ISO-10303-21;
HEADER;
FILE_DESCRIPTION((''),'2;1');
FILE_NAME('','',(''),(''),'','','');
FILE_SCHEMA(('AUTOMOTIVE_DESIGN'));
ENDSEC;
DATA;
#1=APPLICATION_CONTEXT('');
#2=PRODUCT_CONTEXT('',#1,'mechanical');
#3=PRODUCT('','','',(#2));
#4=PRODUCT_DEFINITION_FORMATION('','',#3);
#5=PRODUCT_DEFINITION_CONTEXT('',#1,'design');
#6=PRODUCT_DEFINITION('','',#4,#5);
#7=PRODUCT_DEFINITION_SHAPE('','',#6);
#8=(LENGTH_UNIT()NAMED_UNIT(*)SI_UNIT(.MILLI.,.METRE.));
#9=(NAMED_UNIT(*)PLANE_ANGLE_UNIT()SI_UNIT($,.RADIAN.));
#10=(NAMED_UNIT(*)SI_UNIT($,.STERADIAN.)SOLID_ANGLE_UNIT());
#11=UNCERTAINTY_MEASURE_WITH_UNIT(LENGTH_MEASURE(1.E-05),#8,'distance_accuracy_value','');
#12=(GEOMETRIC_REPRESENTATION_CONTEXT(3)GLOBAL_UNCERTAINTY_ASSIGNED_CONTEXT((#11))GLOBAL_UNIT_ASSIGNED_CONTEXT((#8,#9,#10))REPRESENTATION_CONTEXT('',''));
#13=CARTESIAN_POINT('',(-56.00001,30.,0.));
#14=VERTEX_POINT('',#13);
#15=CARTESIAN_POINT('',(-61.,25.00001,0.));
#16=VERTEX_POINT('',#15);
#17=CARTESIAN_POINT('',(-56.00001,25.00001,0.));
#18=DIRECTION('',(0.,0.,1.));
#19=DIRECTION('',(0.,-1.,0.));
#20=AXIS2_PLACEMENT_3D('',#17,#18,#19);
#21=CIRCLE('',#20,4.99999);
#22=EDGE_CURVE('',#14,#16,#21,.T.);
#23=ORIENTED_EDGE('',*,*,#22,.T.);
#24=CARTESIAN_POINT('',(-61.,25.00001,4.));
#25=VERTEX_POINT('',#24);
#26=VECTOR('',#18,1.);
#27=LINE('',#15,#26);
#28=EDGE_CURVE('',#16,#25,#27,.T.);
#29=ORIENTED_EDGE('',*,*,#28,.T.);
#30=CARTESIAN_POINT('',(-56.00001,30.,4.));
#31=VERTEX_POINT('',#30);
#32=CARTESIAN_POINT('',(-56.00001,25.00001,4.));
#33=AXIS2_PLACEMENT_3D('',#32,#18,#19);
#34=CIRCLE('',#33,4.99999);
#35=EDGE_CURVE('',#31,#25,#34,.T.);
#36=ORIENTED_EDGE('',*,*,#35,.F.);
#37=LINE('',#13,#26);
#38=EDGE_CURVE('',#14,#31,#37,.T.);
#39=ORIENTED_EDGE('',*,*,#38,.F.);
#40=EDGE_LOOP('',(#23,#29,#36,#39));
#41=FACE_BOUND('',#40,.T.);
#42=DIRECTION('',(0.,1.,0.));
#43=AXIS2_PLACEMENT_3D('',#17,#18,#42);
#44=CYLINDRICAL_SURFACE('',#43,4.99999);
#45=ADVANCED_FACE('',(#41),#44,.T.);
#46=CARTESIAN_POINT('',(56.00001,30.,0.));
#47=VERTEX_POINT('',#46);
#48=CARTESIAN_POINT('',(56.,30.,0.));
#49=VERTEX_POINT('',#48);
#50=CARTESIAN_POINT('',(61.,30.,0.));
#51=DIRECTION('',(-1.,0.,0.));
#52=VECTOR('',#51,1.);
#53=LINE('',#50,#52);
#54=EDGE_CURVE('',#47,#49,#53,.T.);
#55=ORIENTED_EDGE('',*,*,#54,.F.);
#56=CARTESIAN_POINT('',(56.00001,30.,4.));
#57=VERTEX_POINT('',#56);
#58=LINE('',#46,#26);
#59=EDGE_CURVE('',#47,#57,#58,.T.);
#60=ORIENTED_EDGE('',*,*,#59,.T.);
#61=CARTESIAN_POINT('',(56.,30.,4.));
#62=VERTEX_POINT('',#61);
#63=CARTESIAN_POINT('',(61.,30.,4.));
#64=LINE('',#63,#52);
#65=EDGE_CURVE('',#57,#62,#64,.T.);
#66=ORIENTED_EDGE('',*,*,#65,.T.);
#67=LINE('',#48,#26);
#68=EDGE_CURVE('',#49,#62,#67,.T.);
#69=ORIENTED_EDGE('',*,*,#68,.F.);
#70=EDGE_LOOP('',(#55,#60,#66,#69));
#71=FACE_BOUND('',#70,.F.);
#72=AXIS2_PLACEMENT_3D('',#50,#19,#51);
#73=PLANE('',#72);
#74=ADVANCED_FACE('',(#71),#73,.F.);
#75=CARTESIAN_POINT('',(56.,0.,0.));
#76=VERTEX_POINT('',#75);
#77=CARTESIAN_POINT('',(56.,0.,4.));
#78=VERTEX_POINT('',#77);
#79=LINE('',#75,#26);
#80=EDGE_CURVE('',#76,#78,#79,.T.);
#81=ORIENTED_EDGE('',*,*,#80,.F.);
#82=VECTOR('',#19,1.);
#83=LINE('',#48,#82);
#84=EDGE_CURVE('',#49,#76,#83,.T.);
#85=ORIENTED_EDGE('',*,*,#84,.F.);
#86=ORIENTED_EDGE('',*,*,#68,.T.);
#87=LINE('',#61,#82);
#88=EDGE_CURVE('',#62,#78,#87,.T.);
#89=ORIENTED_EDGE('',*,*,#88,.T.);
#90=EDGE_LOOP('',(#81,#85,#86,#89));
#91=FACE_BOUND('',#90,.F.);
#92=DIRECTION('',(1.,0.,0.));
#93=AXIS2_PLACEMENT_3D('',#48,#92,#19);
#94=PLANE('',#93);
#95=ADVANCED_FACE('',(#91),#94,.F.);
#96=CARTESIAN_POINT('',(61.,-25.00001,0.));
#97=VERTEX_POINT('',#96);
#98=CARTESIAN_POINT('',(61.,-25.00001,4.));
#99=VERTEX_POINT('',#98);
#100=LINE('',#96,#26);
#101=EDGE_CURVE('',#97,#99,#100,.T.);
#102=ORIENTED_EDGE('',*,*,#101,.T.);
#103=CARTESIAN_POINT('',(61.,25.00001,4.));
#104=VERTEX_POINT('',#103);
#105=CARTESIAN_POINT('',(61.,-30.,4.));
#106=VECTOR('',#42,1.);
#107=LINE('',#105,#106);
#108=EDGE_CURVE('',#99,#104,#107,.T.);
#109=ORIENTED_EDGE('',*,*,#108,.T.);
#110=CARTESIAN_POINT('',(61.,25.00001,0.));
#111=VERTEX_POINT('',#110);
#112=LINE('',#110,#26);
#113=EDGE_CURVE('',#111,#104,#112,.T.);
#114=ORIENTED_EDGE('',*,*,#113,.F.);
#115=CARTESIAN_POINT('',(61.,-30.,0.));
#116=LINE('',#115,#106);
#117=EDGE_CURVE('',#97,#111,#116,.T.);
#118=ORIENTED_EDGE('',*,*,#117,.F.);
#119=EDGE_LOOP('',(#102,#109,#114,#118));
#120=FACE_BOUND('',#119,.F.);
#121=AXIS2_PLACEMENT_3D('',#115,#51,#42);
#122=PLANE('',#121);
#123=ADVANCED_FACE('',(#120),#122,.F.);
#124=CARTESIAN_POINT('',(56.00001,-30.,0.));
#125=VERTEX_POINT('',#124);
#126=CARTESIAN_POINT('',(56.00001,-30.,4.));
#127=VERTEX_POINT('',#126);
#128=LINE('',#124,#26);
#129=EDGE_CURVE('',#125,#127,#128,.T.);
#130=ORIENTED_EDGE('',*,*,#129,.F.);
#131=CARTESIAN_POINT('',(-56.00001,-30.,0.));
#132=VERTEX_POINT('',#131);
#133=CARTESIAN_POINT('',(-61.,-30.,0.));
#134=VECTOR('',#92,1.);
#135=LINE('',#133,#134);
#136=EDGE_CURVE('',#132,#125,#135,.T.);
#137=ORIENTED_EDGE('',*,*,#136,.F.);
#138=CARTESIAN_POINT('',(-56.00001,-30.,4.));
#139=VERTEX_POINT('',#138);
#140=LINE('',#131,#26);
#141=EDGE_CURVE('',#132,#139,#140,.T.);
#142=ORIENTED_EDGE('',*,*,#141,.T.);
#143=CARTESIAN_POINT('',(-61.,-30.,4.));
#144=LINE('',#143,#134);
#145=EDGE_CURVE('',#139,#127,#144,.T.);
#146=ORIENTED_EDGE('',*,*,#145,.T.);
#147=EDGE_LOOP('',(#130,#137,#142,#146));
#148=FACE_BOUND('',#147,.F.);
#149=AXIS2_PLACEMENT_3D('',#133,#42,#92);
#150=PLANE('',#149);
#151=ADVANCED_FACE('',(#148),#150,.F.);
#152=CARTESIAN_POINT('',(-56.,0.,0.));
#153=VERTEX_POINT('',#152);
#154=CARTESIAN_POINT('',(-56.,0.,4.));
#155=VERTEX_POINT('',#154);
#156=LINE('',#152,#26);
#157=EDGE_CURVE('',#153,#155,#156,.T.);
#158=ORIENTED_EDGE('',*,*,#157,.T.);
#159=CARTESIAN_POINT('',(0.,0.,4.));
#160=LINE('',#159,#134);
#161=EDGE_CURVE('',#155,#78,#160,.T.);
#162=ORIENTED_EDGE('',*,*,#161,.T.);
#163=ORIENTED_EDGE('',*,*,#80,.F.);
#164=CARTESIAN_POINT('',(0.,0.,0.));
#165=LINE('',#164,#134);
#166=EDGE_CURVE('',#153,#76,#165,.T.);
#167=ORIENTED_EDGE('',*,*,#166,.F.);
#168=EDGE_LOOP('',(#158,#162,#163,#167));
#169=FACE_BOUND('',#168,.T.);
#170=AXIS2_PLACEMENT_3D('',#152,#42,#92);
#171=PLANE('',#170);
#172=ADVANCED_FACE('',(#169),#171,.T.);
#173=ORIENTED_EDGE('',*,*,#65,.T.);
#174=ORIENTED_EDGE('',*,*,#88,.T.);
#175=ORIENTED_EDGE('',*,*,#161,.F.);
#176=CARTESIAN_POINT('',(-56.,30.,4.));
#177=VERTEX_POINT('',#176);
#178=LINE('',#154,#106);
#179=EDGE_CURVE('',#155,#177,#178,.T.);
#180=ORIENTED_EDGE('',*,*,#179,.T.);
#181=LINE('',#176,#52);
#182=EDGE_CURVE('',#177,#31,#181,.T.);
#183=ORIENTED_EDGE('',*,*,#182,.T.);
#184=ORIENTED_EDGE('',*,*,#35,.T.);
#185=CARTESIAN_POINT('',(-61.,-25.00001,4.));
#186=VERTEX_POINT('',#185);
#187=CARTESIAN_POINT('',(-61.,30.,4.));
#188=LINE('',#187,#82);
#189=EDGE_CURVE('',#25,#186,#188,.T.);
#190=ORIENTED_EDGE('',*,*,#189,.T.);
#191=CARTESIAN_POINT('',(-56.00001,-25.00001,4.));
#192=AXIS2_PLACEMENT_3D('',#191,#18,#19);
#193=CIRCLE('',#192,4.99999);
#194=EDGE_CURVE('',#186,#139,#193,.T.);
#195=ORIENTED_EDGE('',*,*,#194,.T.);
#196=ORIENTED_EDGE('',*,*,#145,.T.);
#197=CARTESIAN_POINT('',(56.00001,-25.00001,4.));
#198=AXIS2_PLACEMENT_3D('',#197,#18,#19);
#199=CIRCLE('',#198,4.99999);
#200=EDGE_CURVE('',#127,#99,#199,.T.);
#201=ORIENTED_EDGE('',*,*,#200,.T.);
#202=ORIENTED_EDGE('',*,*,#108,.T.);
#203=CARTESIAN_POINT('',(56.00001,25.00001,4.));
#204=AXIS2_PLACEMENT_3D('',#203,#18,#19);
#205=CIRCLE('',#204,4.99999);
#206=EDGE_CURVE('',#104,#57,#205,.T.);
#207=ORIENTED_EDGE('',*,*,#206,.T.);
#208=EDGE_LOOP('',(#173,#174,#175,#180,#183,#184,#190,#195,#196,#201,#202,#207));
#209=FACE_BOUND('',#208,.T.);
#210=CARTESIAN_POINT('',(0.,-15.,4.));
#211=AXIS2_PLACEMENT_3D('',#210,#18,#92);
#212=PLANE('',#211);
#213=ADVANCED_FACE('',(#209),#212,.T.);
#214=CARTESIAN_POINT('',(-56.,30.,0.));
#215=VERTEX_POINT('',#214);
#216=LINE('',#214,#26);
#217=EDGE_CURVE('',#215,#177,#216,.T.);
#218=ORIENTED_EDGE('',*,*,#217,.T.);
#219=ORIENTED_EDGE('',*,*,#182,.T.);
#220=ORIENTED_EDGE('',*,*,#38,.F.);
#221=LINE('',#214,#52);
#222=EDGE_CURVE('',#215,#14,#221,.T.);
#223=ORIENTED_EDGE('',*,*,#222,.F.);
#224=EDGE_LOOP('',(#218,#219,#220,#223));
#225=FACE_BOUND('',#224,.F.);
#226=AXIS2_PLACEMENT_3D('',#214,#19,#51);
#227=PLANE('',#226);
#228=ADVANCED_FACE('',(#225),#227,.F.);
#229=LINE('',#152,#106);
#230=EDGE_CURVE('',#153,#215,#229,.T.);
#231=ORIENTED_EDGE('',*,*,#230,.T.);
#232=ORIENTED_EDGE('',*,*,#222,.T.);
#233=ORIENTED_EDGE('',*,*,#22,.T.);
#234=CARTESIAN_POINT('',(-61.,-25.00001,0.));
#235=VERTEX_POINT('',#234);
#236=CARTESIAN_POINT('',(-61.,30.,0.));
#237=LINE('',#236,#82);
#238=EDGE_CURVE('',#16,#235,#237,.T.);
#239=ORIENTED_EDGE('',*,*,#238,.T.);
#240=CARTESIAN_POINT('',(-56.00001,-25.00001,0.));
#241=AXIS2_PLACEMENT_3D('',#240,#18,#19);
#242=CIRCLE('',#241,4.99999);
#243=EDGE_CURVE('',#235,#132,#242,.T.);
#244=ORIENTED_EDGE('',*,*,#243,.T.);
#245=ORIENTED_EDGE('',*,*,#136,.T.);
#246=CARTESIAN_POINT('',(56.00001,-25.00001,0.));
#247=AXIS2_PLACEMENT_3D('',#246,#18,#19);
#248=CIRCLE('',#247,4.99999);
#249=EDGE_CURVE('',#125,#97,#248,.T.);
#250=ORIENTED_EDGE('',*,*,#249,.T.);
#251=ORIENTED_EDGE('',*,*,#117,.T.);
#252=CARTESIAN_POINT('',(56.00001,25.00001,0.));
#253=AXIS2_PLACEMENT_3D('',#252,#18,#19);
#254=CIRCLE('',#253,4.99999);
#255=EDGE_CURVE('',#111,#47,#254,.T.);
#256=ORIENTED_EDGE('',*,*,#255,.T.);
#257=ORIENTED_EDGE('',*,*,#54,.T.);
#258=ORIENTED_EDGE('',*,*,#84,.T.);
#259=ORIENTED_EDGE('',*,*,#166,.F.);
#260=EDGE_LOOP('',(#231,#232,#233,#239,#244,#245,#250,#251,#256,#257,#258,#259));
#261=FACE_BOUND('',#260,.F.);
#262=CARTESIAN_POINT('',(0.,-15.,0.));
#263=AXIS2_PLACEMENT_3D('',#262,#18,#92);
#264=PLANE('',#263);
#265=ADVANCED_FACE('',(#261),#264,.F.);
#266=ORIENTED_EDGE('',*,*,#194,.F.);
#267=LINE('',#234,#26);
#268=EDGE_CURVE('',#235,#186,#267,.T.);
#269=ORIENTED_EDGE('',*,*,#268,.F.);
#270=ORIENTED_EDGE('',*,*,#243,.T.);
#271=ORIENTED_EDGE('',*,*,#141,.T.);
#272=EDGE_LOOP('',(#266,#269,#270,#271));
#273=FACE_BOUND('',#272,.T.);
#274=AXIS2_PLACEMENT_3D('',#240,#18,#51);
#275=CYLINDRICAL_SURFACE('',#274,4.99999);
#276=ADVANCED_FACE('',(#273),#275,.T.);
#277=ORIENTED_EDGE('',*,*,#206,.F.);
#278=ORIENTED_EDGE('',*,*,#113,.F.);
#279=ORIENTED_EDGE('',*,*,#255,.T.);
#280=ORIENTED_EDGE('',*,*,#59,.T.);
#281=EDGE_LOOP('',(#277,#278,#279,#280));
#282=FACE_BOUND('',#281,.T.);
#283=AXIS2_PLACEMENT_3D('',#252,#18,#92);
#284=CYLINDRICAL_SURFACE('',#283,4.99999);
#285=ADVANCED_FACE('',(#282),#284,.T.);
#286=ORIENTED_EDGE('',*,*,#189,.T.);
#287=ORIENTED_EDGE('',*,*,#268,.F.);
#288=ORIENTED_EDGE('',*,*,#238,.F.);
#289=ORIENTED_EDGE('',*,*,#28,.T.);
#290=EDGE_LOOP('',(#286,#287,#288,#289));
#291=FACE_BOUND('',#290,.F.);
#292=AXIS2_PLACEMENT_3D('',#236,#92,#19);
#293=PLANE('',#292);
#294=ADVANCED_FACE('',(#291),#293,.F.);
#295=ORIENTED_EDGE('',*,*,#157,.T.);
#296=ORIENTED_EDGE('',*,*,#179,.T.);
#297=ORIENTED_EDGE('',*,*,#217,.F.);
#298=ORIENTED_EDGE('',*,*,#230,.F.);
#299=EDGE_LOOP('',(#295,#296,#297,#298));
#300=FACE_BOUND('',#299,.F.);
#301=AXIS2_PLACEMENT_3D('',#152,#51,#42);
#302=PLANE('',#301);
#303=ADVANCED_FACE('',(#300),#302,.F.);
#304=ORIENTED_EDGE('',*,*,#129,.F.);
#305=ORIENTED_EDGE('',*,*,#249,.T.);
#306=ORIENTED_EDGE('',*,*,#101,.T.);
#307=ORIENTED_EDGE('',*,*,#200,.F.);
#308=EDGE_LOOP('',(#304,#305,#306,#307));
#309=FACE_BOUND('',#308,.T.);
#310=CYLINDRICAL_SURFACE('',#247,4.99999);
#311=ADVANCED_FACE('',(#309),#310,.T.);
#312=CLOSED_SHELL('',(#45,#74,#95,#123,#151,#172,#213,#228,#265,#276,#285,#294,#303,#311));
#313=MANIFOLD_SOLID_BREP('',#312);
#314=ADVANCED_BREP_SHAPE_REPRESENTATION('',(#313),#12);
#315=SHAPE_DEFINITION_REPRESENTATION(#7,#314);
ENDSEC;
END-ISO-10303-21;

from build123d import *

# Parameters (mm, degrees)
F0_W     = 112
F0_H     = 30
F1_DEPTH = 4
F2_R     = 4.99999


# Not quite as in the source:
# - a fillet or chamfer is up to 0.001 mm smaller than in the source, because OpenCascade refuses the exact size


with BuildPart() as f1:
    # F0 (on Top) → F1 (new body)
    with BuildSketch(Plane.XY):
        with Locations((0, -15)):
            Rectangle(F0_W, F0_H)
        Polygon((-56, -30), (-56, 0), (-56, 30), (-61, 30), (-61, -30), align=None)
        Polygon((56, 30), (56, 0), (56, -30), (61, -30), (61, 30), align=None)
    extrude(amount=F1_DEPTH)

    # F2 (radius 5 in the source; OpenCascade refuses exactly that, so slightly less here)
    f2_edges = [f1.edges().sort_by_distance(p)[0] for p in [
        (-61, -30, 2),
        (61, -30, 2),
        (61, 30, 2),
        (-61, 30, 2),
    ]]
    fillet(f2_edges, radius=F2_R)


solid = f1.part
